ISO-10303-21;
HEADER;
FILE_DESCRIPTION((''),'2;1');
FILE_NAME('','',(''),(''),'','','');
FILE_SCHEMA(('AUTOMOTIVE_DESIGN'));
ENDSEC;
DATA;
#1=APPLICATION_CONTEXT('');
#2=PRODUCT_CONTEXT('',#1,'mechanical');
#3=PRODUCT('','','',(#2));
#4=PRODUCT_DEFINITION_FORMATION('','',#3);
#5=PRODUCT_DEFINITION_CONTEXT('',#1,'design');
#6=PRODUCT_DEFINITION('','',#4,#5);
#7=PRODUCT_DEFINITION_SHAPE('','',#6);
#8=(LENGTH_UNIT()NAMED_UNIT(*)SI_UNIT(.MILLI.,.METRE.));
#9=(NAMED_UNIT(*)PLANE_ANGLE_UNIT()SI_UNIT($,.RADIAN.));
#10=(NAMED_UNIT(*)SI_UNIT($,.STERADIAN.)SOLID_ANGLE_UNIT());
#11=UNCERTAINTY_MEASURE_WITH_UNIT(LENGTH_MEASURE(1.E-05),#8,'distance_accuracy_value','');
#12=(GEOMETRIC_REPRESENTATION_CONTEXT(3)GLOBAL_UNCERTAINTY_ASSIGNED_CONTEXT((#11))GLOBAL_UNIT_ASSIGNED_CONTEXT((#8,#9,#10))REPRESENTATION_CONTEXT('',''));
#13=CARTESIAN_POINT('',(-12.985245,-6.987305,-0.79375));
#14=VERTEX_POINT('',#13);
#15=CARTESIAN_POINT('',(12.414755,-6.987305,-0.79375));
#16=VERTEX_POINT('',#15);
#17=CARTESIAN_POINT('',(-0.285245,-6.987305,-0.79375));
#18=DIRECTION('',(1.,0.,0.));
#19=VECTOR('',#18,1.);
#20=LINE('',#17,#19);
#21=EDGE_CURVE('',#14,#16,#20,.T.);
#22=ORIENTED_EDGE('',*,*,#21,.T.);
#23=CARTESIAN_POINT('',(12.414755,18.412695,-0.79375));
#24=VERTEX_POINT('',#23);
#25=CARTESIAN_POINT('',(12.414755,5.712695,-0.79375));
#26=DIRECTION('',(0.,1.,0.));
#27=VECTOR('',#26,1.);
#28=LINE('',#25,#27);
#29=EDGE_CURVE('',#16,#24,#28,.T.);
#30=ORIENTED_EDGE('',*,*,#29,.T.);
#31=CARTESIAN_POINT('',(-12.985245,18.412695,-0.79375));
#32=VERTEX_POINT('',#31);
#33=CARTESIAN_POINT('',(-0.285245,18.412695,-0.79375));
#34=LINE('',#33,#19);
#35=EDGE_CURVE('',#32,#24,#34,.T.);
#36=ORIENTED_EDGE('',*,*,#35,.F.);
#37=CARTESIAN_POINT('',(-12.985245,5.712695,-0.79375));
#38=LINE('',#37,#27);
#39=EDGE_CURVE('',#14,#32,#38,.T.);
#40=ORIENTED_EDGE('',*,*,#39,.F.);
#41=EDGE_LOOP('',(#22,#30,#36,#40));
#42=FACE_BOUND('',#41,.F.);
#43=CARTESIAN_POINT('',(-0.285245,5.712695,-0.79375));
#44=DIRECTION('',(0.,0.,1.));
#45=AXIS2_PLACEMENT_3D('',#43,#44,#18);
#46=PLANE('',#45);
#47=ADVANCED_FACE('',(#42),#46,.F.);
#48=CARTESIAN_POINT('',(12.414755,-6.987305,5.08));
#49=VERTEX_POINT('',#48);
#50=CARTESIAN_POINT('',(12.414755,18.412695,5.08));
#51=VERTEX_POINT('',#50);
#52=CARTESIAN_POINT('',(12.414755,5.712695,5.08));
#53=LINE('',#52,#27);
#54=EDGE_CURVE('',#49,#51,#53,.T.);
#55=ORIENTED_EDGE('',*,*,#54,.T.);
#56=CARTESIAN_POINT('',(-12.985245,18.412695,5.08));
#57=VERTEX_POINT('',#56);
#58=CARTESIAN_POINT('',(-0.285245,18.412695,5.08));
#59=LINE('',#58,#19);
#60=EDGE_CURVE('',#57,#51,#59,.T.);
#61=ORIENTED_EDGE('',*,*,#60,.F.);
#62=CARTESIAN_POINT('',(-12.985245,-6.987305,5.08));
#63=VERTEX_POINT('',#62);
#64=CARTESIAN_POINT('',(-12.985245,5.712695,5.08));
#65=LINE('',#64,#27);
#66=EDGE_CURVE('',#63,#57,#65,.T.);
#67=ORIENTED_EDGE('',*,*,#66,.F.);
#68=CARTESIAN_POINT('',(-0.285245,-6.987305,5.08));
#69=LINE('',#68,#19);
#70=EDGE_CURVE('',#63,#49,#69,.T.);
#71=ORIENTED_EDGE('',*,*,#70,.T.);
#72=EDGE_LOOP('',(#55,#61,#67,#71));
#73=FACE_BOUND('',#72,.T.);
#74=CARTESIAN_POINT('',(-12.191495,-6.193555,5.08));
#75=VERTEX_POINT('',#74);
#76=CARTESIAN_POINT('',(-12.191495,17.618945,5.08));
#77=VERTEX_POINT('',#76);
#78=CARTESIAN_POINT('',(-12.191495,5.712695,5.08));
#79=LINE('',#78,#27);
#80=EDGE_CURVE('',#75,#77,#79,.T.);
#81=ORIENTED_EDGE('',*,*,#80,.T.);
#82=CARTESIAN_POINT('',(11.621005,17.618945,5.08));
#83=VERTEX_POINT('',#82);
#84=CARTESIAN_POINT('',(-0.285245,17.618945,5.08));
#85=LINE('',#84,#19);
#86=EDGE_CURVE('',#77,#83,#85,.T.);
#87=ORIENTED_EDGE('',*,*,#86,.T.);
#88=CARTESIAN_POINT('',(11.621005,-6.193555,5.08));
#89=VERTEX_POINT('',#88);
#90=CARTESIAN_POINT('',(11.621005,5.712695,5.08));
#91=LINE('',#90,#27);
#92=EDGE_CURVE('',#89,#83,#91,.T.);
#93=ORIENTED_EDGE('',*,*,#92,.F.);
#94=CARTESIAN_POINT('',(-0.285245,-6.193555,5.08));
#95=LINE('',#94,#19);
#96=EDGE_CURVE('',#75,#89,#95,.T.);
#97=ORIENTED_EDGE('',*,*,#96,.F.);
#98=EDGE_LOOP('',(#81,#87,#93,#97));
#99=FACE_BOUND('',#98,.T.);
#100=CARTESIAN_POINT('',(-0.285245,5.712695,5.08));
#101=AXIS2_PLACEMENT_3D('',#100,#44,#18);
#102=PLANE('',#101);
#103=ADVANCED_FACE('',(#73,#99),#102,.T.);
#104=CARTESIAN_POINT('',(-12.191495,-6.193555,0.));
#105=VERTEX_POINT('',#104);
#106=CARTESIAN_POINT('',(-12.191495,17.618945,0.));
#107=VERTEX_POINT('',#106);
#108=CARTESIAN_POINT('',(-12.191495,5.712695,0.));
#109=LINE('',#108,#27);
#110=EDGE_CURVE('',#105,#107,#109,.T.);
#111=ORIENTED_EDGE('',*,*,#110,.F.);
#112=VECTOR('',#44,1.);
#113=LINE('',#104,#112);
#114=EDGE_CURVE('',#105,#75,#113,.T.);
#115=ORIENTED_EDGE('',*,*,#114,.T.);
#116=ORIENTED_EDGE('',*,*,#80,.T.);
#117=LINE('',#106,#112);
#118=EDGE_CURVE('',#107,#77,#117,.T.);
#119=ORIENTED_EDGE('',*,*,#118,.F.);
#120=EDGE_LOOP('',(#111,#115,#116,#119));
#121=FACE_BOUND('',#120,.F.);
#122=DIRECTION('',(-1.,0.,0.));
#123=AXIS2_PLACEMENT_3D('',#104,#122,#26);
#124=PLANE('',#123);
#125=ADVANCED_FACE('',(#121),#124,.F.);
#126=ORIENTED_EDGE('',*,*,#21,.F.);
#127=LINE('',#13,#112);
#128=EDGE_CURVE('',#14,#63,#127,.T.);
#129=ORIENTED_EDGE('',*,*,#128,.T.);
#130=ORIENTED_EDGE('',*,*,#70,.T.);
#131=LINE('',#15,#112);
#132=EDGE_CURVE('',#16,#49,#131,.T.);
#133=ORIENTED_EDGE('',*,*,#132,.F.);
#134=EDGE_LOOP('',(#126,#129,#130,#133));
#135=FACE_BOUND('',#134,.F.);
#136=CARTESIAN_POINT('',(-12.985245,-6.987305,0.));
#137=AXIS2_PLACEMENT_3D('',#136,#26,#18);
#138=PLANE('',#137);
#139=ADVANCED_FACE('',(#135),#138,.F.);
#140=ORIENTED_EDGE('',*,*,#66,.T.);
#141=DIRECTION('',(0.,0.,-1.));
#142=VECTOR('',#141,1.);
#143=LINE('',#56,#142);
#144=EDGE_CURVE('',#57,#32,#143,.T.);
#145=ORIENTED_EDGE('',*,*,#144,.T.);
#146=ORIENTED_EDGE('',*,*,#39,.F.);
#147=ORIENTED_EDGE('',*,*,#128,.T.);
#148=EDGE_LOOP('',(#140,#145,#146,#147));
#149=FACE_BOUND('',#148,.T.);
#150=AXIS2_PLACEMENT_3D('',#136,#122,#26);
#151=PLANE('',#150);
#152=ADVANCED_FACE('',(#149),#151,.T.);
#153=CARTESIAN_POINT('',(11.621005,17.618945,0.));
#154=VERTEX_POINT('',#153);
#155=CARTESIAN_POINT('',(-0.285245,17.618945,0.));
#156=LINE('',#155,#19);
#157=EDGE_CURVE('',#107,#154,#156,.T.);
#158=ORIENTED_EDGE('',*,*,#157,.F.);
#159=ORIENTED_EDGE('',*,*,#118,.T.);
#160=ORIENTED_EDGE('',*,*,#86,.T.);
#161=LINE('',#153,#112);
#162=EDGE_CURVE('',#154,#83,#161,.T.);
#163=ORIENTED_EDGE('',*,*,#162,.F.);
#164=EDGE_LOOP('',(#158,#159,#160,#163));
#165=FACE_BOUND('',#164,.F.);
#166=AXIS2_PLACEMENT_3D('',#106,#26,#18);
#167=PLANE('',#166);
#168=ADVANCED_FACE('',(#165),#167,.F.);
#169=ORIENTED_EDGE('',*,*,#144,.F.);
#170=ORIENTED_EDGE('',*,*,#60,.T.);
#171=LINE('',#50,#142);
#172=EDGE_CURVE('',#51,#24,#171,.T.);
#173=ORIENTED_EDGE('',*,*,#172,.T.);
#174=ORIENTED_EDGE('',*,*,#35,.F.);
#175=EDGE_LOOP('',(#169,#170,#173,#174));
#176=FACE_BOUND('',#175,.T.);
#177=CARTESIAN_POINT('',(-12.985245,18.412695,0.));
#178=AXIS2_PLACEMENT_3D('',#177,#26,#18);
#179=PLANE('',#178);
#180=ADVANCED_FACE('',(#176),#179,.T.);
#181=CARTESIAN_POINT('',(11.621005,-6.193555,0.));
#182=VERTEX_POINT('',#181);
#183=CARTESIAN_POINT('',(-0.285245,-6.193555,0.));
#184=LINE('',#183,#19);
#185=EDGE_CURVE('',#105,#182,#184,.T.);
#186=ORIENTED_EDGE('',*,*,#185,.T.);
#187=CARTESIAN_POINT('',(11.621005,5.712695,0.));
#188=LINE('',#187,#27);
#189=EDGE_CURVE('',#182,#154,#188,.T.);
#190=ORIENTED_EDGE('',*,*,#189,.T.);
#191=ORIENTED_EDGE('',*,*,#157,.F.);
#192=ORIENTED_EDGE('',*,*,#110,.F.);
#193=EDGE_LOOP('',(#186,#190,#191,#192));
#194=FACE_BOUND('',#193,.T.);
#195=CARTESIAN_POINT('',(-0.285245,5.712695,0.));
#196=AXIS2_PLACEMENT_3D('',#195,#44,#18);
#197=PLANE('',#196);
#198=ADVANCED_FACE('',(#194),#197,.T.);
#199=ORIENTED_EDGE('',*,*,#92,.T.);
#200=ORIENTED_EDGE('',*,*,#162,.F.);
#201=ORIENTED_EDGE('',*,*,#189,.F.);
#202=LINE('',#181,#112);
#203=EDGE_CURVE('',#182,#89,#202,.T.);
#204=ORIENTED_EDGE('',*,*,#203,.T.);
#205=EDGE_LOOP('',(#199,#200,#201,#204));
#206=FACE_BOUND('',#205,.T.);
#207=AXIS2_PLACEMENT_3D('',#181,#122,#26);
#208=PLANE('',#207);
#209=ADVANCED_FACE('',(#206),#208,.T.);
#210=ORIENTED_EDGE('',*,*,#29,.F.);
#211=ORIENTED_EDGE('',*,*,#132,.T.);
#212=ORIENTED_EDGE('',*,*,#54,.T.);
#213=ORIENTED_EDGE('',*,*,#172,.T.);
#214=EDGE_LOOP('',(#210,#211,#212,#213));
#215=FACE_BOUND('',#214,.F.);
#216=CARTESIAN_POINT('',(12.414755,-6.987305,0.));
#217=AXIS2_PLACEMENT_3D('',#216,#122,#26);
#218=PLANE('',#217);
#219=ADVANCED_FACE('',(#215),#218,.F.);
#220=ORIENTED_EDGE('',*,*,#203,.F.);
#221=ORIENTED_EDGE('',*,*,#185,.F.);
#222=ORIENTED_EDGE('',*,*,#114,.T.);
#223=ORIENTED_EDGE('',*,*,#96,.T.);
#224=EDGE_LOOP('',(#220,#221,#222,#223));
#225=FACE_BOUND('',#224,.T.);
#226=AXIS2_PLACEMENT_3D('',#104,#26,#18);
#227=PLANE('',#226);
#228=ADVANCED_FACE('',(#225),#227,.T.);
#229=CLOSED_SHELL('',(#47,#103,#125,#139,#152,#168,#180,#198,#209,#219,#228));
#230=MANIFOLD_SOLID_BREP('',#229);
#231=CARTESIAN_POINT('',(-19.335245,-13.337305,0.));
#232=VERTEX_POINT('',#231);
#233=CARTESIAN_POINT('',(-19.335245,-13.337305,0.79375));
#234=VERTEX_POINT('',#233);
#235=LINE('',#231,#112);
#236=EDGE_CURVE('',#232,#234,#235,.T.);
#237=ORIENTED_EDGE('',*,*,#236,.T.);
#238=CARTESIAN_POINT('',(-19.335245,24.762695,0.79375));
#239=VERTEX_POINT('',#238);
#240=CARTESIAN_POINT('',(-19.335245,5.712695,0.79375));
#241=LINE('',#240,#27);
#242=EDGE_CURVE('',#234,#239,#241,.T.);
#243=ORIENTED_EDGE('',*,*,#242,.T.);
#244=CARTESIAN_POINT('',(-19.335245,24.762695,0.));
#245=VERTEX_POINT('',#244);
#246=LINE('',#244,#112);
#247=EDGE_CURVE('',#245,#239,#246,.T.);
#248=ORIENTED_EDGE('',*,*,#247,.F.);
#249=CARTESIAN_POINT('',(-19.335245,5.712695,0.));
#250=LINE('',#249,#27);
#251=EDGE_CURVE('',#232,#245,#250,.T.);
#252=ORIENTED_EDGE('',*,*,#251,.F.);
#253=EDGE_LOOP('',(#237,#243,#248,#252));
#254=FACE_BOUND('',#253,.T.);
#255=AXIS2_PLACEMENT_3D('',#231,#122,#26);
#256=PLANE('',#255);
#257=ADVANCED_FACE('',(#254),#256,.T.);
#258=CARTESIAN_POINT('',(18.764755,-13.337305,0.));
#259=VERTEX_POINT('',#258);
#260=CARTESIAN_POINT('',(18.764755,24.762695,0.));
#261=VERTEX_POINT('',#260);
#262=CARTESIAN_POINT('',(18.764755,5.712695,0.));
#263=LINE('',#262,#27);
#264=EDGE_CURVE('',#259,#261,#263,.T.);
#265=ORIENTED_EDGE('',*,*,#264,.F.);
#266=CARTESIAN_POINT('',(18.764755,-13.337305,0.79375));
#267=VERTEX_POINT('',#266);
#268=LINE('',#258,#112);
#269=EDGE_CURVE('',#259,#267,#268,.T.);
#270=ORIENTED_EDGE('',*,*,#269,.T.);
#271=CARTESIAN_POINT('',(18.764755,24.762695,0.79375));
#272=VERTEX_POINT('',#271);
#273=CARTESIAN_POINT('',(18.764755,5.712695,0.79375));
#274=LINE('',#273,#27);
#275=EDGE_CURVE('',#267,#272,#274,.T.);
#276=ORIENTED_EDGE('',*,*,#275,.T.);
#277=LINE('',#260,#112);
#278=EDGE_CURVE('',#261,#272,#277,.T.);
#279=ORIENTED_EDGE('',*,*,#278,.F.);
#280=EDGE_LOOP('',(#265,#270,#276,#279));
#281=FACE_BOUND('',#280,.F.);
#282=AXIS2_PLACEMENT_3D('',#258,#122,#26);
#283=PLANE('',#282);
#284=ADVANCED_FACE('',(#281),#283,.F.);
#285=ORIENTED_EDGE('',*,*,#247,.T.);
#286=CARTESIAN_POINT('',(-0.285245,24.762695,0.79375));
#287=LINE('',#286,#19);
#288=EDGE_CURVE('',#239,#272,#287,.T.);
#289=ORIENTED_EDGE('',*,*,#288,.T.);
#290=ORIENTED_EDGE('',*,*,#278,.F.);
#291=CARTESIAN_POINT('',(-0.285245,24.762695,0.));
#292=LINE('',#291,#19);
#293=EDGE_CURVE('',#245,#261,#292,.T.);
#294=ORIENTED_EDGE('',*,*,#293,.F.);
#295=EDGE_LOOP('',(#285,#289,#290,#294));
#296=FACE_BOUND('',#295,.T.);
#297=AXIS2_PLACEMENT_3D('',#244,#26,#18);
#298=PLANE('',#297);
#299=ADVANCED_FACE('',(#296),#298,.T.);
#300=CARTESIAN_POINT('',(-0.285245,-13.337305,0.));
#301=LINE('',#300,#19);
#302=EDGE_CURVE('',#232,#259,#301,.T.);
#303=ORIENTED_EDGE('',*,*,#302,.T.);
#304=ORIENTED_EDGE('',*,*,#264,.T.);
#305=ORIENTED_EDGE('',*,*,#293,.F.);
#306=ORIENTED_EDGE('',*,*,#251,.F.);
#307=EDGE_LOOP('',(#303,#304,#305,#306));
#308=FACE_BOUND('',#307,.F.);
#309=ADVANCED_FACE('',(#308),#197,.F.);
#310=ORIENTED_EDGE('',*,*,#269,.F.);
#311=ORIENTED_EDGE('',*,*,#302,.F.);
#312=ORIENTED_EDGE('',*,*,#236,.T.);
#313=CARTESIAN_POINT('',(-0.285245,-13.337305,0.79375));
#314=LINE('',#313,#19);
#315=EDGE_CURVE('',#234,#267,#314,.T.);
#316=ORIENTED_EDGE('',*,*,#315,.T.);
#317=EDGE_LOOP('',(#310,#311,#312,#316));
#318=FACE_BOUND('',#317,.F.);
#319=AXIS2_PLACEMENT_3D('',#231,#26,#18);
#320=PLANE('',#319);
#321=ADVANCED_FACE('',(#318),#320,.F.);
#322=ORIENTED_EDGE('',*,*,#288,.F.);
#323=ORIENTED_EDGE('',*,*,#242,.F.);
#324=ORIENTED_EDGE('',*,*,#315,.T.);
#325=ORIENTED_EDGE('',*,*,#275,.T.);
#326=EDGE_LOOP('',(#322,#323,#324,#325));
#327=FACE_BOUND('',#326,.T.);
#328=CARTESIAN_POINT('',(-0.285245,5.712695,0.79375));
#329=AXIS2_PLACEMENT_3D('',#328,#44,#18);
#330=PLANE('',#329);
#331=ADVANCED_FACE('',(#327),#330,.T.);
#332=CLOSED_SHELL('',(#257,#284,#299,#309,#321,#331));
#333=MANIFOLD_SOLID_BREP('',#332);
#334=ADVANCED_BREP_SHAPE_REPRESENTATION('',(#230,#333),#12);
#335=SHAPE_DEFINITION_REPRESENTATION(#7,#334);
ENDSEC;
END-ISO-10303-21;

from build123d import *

# Parameters (mm, degrees)
F0_W     = 38.1
F0_H     = 38.1
F1_DEPTH = 0.79375
F2_W     = 25.4
F2_H     = 25.4
F4_DEPTH = 0.79375
F5_W     = 25.4
F5_H     = 25.4
F5_W_2   = 23.8125
F5_H_2   = 23.8125
F6_DEPTH = 5.08


with BuildPart() as f1:
    # F0 (on Top) → F1 (new body)
    with BuildSketch(Plane.XY):
        with Locations((-0.2852454782, 5.7126945901)):
            Rectangle(F0_W, F0_H)
    extrude(amount=F1_DEPTH)


with BuildPart() as f4:
    # F2 (on Top) → F4 (new body)
    with BuildSketch(Plane.XY):
        with Locations((-0.2852454782, 5.7126945901)):
            Rectangle(F2_W, F2_H)
    extrude(amount=-F4_DEPTH)

    # F5 (on face) → F6 (join)
    with BuildSketch(Plane.XY):
        with Locations((-0.2852454782, 5.7126945901)):
            Rectangle(F5_W, F5_H)
        with Locations((-0.2852454782, 5.7126945901)):
            Rectangle(F5_W_2, F5_H_2, mode=Mode.SUBTRACT)
    extrude(amount=F6_DEPTH)


solid = Compound([f1.part, f4.part])
